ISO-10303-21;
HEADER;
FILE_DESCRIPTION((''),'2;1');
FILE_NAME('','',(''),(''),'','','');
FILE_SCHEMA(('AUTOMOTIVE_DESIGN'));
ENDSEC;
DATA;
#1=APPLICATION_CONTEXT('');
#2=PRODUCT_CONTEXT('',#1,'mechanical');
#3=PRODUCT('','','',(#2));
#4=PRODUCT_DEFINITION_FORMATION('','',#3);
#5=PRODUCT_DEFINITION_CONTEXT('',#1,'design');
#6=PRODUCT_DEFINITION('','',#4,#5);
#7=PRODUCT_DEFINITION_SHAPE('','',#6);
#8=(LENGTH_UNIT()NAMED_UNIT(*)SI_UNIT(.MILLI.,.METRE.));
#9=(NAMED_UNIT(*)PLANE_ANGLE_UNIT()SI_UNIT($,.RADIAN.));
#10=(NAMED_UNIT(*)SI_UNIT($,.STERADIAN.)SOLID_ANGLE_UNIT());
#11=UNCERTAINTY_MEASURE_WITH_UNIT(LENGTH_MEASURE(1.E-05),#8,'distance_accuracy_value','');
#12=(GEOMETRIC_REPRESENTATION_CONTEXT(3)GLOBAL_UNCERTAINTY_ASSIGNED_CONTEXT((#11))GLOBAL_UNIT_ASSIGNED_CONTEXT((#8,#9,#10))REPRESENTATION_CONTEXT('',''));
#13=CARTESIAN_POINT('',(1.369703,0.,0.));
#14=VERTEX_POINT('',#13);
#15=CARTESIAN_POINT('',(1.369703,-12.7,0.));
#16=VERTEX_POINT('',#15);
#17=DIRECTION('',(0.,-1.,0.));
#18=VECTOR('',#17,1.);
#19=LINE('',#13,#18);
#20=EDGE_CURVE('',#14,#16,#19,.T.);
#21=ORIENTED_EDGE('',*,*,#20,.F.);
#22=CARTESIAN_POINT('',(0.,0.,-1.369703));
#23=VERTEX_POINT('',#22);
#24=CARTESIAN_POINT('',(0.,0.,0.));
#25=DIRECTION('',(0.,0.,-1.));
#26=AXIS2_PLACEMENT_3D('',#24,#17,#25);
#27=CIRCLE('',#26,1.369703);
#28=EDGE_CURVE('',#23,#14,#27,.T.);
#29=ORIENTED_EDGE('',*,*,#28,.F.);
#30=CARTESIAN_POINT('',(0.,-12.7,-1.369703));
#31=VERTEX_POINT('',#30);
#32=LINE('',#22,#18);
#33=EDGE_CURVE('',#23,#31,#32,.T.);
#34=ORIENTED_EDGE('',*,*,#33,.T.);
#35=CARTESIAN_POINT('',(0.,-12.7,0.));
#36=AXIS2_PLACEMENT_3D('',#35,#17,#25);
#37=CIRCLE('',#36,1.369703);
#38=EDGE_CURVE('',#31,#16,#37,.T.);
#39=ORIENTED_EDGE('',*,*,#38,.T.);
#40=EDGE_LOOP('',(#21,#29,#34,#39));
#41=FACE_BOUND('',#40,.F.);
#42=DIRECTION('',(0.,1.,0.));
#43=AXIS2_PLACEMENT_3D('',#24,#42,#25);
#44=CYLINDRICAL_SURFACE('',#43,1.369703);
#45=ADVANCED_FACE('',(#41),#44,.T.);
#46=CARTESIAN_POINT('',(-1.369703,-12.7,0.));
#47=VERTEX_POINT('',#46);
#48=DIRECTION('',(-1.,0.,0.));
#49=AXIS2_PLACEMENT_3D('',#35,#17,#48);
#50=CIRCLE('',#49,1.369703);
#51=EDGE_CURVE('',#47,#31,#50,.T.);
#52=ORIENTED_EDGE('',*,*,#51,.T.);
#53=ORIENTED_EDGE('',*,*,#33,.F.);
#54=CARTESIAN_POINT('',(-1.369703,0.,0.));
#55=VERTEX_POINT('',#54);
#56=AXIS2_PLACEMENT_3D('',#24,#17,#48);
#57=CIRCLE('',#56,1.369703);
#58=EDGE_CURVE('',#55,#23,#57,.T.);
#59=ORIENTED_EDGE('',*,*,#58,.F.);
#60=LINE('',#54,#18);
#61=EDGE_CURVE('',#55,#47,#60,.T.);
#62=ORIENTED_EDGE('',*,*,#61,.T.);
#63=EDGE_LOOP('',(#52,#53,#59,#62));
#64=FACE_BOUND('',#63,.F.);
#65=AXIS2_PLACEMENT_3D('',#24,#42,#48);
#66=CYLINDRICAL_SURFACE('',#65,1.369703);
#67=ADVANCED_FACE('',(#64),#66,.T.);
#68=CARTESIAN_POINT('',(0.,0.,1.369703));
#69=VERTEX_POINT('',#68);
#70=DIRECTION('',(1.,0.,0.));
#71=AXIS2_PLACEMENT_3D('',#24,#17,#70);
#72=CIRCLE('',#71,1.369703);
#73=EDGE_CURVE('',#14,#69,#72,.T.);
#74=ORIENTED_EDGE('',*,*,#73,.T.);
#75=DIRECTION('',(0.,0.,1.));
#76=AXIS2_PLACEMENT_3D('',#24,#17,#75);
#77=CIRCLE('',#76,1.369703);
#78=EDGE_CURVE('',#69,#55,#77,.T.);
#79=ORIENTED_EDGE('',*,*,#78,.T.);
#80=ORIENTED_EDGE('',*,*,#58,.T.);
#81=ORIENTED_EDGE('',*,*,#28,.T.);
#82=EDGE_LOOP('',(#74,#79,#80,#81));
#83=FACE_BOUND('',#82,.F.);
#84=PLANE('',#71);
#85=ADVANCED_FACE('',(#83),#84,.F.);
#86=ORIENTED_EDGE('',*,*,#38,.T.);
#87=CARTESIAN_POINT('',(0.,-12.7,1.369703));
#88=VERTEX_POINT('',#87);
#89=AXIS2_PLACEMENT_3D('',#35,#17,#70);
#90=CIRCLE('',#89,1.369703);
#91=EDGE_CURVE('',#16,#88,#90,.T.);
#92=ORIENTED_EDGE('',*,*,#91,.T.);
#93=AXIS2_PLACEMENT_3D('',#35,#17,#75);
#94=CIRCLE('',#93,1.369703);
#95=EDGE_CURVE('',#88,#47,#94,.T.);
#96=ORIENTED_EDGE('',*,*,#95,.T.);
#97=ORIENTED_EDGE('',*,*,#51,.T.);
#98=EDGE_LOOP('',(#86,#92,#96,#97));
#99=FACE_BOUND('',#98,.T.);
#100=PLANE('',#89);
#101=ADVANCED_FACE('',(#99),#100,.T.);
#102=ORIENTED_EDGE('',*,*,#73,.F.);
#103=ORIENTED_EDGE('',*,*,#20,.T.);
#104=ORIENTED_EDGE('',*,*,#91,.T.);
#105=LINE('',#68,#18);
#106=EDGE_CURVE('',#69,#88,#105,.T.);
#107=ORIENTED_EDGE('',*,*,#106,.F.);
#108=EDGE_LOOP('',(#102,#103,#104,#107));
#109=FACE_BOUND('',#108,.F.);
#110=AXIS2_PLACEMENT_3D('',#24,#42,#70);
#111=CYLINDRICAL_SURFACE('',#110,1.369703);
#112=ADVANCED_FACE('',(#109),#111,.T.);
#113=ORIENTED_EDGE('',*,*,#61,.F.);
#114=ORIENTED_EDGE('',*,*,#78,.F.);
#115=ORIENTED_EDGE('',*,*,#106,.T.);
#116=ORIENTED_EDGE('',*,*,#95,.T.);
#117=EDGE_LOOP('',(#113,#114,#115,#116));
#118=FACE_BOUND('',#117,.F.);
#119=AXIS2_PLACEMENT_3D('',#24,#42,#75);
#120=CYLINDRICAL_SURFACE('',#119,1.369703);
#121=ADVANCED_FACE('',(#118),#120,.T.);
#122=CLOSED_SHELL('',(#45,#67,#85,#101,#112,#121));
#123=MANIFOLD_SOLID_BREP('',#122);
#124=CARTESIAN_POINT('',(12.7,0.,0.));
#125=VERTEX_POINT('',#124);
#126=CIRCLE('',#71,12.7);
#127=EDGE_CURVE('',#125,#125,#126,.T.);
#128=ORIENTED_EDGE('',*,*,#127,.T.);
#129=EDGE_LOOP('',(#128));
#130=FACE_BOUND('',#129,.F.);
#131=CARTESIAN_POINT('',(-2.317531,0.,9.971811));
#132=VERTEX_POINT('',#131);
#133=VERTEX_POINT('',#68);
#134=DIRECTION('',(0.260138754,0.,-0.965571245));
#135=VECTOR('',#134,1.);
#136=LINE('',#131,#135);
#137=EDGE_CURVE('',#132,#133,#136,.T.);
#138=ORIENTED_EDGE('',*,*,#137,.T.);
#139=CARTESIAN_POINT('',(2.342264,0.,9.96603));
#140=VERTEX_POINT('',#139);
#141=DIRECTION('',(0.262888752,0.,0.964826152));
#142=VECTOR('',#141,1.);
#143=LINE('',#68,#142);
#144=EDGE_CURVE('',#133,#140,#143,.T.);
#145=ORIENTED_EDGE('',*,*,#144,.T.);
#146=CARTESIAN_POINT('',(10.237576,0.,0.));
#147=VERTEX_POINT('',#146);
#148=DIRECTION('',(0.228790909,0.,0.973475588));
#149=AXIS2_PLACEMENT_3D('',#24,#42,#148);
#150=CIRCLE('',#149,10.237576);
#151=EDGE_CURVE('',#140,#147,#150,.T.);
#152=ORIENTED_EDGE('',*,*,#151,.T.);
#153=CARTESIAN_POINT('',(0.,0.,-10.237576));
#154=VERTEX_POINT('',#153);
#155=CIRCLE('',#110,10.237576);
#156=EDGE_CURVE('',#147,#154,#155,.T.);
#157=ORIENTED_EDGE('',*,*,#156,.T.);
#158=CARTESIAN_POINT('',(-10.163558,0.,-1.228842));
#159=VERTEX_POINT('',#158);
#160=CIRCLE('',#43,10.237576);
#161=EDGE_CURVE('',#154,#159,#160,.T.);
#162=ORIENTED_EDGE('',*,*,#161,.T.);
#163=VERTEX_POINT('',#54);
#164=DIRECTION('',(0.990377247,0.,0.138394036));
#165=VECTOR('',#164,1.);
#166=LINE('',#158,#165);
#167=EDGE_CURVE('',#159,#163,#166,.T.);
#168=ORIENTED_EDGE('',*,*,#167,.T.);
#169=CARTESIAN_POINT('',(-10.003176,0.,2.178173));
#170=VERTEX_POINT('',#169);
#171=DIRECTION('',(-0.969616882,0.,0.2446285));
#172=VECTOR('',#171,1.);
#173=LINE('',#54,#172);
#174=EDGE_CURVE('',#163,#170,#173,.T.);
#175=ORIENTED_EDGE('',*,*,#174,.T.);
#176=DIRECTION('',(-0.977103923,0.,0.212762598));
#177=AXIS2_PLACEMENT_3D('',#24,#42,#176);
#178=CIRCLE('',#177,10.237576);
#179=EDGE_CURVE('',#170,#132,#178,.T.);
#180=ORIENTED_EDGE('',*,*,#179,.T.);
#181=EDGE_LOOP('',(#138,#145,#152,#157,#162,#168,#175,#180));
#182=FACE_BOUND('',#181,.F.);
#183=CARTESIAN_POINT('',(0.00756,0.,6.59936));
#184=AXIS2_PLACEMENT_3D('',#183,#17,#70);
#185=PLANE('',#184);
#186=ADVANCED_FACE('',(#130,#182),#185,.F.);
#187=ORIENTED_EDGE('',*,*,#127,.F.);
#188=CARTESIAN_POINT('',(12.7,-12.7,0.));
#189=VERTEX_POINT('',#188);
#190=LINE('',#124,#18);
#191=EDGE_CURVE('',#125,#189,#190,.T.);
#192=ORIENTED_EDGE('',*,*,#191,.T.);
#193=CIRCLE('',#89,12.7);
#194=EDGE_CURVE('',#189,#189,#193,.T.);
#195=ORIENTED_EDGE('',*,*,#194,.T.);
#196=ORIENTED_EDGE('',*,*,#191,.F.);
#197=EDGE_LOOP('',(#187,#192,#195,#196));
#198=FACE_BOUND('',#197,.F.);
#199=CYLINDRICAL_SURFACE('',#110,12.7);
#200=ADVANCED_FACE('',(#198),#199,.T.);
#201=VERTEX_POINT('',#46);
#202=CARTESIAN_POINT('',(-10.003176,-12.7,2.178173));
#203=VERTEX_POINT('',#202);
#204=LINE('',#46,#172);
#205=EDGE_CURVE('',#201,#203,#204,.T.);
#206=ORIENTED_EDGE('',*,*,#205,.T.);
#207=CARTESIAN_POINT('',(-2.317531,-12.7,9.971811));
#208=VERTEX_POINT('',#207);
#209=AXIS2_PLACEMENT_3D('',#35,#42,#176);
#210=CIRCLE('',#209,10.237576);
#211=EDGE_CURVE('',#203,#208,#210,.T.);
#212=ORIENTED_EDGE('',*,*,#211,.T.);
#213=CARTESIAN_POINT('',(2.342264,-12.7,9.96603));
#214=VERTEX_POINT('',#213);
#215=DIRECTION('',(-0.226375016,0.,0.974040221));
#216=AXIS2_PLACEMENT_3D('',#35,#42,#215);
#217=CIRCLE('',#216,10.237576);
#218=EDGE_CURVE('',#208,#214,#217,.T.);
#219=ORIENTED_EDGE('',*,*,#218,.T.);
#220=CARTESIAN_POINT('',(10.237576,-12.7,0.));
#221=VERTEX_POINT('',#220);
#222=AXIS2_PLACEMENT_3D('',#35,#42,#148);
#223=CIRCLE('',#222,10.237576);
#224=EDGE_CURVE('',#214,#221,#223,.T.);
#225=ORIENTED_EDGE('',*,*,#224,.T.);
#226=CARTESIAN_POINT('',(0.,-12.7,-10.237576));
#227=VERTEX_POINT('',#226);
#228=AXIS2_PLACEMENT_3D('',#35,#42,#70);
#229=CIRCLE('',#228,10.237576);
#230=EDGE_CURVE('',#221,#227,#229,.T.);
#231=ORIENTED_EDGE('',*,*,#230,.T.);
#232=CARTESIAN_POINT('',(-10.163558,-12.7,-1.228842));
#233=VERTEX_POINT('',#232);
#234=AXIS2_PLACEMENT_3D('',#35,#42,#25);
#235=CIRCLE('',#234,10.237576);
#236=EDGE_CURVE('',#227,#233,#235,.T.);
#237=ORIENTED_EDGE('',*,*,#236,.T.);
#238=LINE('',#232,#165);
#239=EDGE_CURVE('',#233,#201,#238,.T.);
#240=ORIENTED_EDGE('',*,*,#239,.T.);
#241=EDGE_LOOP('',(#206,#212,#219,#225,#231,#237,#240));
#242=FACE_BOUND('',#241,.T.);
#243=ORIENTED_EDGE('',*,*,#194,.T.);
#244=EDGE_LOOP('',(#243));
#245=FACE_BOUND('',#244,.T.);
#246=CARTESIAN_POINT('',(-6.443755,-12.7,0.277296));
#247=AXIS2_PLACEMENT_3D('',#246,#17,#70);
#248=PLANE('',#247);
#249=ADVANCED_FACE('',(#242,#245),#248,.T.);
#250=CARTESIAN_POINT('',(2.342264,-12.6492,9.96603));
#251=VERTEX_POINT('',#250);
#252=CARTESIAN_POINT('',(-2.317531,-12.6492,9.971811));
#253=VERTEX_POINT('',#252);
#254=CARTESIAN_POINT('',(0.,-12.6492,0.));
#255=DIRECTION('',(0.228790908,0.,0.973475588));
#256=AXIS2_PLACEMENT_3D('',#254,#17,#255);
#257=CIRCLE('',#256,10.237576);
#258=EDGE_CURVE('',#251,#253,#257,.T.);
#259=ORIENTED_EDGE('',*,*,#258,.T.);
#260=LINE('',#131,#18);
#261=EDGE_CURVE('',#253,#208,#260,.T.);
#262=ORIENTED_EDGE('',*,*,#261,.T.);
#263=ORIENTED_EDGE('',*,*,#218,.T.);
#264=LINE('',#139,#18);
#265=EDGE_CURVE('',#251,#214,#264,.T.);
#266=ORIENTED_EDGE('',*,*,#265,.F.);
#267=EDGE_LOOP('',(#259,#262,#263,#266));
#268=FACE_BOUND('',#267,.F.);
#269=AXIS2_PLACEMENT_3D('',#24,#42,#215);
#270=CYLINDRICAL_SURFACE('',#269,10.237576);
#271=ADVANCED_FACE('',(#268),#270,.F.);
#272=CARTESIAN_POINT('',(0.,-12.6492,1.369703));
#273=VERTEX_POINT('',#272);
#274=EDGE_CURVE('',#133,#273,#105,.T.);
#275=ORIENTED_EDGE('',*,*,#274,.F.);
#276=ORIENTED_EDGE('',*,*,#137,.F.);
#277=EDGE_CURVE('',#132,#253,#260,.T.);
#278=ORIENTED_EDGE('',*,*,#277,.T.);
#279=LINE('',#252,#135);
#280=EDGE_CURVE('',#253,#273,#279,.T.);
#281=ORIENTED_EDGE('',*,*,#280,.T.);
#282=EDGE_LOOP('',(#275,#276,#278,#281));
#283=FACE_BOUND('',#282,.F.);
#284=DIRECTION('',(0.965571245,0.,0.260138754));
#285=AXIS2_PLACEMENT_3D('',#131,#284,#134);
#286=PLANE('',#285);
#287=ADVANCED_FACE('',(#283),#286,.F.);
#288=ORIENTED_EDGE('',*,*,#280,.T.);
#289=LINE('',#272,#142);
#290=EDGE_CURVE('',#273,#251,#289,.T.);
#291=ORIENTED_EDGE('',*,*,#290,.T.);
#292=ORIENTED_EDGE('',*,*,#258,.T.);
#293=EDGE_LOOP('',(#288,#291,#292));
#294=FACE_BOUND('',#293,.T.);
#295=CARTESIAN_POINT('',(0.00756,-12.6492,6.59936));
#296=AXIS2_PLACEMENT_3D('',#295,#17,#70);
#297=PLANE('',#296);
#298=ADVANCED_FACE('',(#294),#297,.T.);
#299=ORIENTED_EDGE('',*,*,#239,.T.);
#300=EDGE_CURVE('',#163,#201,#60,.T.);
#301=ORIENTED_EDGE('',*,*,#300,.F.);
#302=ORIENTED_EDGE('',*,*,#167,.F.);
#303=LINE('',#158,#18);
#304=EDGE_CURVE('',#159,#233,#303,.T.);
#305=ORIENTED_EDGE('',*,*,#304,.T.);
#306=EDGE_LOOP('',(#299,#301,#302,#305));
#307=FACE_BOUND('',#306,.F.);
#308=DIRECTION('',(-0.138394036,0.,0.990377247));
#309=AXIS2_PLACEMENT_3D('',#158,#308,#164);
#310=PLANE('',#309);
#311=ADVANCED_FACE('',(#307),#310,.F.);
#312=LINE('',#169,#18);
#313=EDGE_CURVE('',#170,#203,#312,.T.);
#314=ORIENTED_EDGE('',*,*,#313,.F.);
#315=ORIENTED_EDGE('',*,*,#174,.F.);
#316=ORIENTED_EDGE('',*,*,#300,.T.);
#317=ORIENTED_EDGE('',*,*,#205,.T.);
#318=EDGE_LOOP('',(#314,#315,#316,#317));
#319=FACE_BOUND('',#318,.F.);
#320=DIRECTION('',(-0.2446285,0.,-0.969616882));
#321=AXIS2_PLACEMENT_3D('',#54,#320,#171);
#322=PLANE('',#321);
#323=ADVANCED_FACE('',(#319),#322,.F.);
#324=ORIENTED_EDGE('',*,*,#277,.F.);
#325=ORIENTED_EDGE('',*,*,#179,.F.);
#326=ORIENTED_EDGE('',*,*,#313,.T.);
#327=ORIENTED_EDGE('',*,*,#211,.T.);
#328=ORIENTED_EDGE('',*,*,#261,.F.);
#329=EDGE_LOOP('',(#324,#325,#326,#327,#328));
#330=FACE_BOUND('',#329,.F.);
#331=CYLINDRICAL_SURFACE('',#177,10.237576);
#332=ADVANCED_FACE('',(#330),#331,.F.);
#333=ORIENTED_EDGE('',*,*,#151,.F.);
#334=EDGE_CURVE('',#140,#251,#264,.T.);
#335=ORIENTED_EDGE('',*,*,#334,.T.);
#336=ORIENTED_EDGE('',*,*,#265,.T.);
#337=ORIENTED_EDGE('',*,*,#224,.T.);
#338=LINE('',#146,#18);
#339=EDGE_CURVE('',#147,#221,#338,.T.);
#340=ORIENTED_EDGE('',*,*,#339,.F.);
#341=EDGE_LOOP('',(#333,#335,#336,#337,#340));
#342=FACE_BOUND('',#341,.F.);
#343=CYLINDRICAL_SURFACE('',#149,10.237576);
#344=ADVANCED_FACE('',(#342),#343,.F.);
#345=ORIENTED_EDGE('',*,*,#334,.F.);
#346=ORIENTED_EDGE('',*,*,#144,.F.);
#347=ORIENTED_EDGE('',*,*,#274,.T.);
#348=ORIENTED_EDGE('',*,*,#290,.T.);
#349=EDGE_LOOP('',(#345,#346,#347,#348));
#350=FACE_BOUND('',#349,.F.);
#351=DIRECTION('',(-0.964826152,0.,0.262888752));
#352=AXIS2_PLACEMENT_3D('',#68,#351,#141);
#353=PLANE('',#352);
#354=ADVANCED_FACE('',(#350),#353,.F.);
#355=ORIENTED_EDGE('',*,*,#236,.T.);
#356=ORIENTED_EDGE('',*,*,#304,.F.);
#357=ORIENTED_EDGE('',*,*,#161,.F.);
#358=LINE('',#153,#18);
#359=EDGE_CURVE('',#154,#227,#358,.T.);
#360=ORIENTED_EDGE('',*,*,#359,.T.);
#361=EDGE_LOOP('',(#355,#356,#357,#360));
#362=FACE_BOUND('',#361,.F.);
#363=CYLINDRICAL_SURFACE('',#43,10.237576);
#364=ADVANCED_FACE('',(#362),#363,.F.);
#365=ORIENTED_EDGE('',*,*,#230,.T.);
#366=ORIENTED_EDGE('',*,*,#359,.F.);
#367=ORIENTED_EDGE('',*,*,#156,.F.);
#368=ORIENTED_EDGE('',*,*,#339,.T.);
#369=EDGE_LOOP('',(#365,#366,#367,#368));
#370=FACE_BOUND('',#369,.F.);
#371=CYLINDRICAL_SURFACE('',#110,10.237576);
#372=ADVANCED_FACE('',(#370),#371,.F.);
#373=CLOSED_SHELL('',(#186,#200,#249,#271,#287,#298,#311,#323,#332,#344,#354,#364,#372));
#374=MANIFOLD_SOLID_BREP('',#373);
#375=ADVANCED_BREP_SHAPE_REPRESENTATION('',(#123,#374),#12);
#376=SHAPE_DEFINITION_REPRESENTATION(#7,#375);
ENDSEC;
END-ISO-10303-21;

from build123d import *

# Parameters (mm, degrees)
F0_R     = 12.7
F1_DEPTH = 12.7
F2_DEPTH = 12.7
F4_DEPTH = 12.6492


# Not quite as in the source:
# - a feature of the source that left no trace in its solid (it failed there, or was rolled back) is left out


with BuildPart() as f1:
    # F0 (on Front) → F1 (new body)
    with BuildSketch(Plane.XZ):
        Circle(F0_R)
        with BuildLine():
            ThreePointArc((2.342264303, 9.9660302686), (8.0245582458, 6.3572341736), (10.2375759523, 0))
            ThreePointArc((10.2375759523, 0), (7.2390593788, -7.2390593788), (0, -10.2375759523))
            ThreePointArc((0, -10.2375759523), (-6.7907141872, -7.6612115365), (-10.1635578802, -1.2288419733))
            ThreePointArc((-10.1635578802, -1.2288419733), (-10.2262516737, 0.4813918215), (-10.003175629, 2.178173252))
            ThreePointArc((-10.003175629, 2.178173252), (-7.2893862495, 7.1883801711), (-2.3175314223, 9.9718107426))
            ThreePointArc((-2.3175314223, 9.9718107426), (0.0126996975, 10.2375680753), (2.342264303, 9.9660302686))
        make_face(mode=Mode.SUBTRACT)
    extrude(amount=F1_DEPTH)

    # F0 (on Front) → F2 (join)
    with BuildSketch(Plane.XZ):
        with BuildLine():
            ThreePointArc((-10.003175629, 2.178173252), (-10.2262516737, 0.4813918215), (-10.1635578802, -1.2288419733))
            Line((-10.1635578802, -1.2288419733), (-1.3697025857, 0))
            Line((-1.3697025857, 0), (-10.003175629, 2.178173252))
        make_face()
    extrude(amount=F2_DEPTH)

    # F0 (on Front) → F4 (join)
    with BuildSketch(Plane.XZ):
        with BuildLine():
            Line((0, 1.3697025857), (2.342264303, 9.9660302686))
            ThreePointArc((2.342264303, 9.9660302686), (0.0126996975, 10.2375680753), (-2.3175314223, 9.9718107426))
            Line((-2.3175314223, 9.9718107426), (0, 1.3697025857))
        make_face()
    extrude(amount=F4_DEPTH)


with BuildPart() as f1b:
    # F0 (on Front) → F1, piece 2 (new body)
    with BuildSketch(Plane.XZ):
        with BuildLine():
            ThreePointArc((0, -1.3697025857), (0.9685259866, -0.9685259866), (1.3697025857, 0))
            ThreePointArc((1.3697025857, 0), (0.9685259866, 0.9685259866), (0, 1.3697025857))
            ThreePointArc((0, 1.3697025857), (-0.9685259866, 0.9685259866), (-1.3697025857, 0))
            ThreePointArc((-1.3697025857, 0), (-0.9685259866, -0.9685259866), (0, -1.3697025857))
        make_face()
    extrude(amount=F1_DEPTH)


solid = Compound([f1.part, f1b.part])
